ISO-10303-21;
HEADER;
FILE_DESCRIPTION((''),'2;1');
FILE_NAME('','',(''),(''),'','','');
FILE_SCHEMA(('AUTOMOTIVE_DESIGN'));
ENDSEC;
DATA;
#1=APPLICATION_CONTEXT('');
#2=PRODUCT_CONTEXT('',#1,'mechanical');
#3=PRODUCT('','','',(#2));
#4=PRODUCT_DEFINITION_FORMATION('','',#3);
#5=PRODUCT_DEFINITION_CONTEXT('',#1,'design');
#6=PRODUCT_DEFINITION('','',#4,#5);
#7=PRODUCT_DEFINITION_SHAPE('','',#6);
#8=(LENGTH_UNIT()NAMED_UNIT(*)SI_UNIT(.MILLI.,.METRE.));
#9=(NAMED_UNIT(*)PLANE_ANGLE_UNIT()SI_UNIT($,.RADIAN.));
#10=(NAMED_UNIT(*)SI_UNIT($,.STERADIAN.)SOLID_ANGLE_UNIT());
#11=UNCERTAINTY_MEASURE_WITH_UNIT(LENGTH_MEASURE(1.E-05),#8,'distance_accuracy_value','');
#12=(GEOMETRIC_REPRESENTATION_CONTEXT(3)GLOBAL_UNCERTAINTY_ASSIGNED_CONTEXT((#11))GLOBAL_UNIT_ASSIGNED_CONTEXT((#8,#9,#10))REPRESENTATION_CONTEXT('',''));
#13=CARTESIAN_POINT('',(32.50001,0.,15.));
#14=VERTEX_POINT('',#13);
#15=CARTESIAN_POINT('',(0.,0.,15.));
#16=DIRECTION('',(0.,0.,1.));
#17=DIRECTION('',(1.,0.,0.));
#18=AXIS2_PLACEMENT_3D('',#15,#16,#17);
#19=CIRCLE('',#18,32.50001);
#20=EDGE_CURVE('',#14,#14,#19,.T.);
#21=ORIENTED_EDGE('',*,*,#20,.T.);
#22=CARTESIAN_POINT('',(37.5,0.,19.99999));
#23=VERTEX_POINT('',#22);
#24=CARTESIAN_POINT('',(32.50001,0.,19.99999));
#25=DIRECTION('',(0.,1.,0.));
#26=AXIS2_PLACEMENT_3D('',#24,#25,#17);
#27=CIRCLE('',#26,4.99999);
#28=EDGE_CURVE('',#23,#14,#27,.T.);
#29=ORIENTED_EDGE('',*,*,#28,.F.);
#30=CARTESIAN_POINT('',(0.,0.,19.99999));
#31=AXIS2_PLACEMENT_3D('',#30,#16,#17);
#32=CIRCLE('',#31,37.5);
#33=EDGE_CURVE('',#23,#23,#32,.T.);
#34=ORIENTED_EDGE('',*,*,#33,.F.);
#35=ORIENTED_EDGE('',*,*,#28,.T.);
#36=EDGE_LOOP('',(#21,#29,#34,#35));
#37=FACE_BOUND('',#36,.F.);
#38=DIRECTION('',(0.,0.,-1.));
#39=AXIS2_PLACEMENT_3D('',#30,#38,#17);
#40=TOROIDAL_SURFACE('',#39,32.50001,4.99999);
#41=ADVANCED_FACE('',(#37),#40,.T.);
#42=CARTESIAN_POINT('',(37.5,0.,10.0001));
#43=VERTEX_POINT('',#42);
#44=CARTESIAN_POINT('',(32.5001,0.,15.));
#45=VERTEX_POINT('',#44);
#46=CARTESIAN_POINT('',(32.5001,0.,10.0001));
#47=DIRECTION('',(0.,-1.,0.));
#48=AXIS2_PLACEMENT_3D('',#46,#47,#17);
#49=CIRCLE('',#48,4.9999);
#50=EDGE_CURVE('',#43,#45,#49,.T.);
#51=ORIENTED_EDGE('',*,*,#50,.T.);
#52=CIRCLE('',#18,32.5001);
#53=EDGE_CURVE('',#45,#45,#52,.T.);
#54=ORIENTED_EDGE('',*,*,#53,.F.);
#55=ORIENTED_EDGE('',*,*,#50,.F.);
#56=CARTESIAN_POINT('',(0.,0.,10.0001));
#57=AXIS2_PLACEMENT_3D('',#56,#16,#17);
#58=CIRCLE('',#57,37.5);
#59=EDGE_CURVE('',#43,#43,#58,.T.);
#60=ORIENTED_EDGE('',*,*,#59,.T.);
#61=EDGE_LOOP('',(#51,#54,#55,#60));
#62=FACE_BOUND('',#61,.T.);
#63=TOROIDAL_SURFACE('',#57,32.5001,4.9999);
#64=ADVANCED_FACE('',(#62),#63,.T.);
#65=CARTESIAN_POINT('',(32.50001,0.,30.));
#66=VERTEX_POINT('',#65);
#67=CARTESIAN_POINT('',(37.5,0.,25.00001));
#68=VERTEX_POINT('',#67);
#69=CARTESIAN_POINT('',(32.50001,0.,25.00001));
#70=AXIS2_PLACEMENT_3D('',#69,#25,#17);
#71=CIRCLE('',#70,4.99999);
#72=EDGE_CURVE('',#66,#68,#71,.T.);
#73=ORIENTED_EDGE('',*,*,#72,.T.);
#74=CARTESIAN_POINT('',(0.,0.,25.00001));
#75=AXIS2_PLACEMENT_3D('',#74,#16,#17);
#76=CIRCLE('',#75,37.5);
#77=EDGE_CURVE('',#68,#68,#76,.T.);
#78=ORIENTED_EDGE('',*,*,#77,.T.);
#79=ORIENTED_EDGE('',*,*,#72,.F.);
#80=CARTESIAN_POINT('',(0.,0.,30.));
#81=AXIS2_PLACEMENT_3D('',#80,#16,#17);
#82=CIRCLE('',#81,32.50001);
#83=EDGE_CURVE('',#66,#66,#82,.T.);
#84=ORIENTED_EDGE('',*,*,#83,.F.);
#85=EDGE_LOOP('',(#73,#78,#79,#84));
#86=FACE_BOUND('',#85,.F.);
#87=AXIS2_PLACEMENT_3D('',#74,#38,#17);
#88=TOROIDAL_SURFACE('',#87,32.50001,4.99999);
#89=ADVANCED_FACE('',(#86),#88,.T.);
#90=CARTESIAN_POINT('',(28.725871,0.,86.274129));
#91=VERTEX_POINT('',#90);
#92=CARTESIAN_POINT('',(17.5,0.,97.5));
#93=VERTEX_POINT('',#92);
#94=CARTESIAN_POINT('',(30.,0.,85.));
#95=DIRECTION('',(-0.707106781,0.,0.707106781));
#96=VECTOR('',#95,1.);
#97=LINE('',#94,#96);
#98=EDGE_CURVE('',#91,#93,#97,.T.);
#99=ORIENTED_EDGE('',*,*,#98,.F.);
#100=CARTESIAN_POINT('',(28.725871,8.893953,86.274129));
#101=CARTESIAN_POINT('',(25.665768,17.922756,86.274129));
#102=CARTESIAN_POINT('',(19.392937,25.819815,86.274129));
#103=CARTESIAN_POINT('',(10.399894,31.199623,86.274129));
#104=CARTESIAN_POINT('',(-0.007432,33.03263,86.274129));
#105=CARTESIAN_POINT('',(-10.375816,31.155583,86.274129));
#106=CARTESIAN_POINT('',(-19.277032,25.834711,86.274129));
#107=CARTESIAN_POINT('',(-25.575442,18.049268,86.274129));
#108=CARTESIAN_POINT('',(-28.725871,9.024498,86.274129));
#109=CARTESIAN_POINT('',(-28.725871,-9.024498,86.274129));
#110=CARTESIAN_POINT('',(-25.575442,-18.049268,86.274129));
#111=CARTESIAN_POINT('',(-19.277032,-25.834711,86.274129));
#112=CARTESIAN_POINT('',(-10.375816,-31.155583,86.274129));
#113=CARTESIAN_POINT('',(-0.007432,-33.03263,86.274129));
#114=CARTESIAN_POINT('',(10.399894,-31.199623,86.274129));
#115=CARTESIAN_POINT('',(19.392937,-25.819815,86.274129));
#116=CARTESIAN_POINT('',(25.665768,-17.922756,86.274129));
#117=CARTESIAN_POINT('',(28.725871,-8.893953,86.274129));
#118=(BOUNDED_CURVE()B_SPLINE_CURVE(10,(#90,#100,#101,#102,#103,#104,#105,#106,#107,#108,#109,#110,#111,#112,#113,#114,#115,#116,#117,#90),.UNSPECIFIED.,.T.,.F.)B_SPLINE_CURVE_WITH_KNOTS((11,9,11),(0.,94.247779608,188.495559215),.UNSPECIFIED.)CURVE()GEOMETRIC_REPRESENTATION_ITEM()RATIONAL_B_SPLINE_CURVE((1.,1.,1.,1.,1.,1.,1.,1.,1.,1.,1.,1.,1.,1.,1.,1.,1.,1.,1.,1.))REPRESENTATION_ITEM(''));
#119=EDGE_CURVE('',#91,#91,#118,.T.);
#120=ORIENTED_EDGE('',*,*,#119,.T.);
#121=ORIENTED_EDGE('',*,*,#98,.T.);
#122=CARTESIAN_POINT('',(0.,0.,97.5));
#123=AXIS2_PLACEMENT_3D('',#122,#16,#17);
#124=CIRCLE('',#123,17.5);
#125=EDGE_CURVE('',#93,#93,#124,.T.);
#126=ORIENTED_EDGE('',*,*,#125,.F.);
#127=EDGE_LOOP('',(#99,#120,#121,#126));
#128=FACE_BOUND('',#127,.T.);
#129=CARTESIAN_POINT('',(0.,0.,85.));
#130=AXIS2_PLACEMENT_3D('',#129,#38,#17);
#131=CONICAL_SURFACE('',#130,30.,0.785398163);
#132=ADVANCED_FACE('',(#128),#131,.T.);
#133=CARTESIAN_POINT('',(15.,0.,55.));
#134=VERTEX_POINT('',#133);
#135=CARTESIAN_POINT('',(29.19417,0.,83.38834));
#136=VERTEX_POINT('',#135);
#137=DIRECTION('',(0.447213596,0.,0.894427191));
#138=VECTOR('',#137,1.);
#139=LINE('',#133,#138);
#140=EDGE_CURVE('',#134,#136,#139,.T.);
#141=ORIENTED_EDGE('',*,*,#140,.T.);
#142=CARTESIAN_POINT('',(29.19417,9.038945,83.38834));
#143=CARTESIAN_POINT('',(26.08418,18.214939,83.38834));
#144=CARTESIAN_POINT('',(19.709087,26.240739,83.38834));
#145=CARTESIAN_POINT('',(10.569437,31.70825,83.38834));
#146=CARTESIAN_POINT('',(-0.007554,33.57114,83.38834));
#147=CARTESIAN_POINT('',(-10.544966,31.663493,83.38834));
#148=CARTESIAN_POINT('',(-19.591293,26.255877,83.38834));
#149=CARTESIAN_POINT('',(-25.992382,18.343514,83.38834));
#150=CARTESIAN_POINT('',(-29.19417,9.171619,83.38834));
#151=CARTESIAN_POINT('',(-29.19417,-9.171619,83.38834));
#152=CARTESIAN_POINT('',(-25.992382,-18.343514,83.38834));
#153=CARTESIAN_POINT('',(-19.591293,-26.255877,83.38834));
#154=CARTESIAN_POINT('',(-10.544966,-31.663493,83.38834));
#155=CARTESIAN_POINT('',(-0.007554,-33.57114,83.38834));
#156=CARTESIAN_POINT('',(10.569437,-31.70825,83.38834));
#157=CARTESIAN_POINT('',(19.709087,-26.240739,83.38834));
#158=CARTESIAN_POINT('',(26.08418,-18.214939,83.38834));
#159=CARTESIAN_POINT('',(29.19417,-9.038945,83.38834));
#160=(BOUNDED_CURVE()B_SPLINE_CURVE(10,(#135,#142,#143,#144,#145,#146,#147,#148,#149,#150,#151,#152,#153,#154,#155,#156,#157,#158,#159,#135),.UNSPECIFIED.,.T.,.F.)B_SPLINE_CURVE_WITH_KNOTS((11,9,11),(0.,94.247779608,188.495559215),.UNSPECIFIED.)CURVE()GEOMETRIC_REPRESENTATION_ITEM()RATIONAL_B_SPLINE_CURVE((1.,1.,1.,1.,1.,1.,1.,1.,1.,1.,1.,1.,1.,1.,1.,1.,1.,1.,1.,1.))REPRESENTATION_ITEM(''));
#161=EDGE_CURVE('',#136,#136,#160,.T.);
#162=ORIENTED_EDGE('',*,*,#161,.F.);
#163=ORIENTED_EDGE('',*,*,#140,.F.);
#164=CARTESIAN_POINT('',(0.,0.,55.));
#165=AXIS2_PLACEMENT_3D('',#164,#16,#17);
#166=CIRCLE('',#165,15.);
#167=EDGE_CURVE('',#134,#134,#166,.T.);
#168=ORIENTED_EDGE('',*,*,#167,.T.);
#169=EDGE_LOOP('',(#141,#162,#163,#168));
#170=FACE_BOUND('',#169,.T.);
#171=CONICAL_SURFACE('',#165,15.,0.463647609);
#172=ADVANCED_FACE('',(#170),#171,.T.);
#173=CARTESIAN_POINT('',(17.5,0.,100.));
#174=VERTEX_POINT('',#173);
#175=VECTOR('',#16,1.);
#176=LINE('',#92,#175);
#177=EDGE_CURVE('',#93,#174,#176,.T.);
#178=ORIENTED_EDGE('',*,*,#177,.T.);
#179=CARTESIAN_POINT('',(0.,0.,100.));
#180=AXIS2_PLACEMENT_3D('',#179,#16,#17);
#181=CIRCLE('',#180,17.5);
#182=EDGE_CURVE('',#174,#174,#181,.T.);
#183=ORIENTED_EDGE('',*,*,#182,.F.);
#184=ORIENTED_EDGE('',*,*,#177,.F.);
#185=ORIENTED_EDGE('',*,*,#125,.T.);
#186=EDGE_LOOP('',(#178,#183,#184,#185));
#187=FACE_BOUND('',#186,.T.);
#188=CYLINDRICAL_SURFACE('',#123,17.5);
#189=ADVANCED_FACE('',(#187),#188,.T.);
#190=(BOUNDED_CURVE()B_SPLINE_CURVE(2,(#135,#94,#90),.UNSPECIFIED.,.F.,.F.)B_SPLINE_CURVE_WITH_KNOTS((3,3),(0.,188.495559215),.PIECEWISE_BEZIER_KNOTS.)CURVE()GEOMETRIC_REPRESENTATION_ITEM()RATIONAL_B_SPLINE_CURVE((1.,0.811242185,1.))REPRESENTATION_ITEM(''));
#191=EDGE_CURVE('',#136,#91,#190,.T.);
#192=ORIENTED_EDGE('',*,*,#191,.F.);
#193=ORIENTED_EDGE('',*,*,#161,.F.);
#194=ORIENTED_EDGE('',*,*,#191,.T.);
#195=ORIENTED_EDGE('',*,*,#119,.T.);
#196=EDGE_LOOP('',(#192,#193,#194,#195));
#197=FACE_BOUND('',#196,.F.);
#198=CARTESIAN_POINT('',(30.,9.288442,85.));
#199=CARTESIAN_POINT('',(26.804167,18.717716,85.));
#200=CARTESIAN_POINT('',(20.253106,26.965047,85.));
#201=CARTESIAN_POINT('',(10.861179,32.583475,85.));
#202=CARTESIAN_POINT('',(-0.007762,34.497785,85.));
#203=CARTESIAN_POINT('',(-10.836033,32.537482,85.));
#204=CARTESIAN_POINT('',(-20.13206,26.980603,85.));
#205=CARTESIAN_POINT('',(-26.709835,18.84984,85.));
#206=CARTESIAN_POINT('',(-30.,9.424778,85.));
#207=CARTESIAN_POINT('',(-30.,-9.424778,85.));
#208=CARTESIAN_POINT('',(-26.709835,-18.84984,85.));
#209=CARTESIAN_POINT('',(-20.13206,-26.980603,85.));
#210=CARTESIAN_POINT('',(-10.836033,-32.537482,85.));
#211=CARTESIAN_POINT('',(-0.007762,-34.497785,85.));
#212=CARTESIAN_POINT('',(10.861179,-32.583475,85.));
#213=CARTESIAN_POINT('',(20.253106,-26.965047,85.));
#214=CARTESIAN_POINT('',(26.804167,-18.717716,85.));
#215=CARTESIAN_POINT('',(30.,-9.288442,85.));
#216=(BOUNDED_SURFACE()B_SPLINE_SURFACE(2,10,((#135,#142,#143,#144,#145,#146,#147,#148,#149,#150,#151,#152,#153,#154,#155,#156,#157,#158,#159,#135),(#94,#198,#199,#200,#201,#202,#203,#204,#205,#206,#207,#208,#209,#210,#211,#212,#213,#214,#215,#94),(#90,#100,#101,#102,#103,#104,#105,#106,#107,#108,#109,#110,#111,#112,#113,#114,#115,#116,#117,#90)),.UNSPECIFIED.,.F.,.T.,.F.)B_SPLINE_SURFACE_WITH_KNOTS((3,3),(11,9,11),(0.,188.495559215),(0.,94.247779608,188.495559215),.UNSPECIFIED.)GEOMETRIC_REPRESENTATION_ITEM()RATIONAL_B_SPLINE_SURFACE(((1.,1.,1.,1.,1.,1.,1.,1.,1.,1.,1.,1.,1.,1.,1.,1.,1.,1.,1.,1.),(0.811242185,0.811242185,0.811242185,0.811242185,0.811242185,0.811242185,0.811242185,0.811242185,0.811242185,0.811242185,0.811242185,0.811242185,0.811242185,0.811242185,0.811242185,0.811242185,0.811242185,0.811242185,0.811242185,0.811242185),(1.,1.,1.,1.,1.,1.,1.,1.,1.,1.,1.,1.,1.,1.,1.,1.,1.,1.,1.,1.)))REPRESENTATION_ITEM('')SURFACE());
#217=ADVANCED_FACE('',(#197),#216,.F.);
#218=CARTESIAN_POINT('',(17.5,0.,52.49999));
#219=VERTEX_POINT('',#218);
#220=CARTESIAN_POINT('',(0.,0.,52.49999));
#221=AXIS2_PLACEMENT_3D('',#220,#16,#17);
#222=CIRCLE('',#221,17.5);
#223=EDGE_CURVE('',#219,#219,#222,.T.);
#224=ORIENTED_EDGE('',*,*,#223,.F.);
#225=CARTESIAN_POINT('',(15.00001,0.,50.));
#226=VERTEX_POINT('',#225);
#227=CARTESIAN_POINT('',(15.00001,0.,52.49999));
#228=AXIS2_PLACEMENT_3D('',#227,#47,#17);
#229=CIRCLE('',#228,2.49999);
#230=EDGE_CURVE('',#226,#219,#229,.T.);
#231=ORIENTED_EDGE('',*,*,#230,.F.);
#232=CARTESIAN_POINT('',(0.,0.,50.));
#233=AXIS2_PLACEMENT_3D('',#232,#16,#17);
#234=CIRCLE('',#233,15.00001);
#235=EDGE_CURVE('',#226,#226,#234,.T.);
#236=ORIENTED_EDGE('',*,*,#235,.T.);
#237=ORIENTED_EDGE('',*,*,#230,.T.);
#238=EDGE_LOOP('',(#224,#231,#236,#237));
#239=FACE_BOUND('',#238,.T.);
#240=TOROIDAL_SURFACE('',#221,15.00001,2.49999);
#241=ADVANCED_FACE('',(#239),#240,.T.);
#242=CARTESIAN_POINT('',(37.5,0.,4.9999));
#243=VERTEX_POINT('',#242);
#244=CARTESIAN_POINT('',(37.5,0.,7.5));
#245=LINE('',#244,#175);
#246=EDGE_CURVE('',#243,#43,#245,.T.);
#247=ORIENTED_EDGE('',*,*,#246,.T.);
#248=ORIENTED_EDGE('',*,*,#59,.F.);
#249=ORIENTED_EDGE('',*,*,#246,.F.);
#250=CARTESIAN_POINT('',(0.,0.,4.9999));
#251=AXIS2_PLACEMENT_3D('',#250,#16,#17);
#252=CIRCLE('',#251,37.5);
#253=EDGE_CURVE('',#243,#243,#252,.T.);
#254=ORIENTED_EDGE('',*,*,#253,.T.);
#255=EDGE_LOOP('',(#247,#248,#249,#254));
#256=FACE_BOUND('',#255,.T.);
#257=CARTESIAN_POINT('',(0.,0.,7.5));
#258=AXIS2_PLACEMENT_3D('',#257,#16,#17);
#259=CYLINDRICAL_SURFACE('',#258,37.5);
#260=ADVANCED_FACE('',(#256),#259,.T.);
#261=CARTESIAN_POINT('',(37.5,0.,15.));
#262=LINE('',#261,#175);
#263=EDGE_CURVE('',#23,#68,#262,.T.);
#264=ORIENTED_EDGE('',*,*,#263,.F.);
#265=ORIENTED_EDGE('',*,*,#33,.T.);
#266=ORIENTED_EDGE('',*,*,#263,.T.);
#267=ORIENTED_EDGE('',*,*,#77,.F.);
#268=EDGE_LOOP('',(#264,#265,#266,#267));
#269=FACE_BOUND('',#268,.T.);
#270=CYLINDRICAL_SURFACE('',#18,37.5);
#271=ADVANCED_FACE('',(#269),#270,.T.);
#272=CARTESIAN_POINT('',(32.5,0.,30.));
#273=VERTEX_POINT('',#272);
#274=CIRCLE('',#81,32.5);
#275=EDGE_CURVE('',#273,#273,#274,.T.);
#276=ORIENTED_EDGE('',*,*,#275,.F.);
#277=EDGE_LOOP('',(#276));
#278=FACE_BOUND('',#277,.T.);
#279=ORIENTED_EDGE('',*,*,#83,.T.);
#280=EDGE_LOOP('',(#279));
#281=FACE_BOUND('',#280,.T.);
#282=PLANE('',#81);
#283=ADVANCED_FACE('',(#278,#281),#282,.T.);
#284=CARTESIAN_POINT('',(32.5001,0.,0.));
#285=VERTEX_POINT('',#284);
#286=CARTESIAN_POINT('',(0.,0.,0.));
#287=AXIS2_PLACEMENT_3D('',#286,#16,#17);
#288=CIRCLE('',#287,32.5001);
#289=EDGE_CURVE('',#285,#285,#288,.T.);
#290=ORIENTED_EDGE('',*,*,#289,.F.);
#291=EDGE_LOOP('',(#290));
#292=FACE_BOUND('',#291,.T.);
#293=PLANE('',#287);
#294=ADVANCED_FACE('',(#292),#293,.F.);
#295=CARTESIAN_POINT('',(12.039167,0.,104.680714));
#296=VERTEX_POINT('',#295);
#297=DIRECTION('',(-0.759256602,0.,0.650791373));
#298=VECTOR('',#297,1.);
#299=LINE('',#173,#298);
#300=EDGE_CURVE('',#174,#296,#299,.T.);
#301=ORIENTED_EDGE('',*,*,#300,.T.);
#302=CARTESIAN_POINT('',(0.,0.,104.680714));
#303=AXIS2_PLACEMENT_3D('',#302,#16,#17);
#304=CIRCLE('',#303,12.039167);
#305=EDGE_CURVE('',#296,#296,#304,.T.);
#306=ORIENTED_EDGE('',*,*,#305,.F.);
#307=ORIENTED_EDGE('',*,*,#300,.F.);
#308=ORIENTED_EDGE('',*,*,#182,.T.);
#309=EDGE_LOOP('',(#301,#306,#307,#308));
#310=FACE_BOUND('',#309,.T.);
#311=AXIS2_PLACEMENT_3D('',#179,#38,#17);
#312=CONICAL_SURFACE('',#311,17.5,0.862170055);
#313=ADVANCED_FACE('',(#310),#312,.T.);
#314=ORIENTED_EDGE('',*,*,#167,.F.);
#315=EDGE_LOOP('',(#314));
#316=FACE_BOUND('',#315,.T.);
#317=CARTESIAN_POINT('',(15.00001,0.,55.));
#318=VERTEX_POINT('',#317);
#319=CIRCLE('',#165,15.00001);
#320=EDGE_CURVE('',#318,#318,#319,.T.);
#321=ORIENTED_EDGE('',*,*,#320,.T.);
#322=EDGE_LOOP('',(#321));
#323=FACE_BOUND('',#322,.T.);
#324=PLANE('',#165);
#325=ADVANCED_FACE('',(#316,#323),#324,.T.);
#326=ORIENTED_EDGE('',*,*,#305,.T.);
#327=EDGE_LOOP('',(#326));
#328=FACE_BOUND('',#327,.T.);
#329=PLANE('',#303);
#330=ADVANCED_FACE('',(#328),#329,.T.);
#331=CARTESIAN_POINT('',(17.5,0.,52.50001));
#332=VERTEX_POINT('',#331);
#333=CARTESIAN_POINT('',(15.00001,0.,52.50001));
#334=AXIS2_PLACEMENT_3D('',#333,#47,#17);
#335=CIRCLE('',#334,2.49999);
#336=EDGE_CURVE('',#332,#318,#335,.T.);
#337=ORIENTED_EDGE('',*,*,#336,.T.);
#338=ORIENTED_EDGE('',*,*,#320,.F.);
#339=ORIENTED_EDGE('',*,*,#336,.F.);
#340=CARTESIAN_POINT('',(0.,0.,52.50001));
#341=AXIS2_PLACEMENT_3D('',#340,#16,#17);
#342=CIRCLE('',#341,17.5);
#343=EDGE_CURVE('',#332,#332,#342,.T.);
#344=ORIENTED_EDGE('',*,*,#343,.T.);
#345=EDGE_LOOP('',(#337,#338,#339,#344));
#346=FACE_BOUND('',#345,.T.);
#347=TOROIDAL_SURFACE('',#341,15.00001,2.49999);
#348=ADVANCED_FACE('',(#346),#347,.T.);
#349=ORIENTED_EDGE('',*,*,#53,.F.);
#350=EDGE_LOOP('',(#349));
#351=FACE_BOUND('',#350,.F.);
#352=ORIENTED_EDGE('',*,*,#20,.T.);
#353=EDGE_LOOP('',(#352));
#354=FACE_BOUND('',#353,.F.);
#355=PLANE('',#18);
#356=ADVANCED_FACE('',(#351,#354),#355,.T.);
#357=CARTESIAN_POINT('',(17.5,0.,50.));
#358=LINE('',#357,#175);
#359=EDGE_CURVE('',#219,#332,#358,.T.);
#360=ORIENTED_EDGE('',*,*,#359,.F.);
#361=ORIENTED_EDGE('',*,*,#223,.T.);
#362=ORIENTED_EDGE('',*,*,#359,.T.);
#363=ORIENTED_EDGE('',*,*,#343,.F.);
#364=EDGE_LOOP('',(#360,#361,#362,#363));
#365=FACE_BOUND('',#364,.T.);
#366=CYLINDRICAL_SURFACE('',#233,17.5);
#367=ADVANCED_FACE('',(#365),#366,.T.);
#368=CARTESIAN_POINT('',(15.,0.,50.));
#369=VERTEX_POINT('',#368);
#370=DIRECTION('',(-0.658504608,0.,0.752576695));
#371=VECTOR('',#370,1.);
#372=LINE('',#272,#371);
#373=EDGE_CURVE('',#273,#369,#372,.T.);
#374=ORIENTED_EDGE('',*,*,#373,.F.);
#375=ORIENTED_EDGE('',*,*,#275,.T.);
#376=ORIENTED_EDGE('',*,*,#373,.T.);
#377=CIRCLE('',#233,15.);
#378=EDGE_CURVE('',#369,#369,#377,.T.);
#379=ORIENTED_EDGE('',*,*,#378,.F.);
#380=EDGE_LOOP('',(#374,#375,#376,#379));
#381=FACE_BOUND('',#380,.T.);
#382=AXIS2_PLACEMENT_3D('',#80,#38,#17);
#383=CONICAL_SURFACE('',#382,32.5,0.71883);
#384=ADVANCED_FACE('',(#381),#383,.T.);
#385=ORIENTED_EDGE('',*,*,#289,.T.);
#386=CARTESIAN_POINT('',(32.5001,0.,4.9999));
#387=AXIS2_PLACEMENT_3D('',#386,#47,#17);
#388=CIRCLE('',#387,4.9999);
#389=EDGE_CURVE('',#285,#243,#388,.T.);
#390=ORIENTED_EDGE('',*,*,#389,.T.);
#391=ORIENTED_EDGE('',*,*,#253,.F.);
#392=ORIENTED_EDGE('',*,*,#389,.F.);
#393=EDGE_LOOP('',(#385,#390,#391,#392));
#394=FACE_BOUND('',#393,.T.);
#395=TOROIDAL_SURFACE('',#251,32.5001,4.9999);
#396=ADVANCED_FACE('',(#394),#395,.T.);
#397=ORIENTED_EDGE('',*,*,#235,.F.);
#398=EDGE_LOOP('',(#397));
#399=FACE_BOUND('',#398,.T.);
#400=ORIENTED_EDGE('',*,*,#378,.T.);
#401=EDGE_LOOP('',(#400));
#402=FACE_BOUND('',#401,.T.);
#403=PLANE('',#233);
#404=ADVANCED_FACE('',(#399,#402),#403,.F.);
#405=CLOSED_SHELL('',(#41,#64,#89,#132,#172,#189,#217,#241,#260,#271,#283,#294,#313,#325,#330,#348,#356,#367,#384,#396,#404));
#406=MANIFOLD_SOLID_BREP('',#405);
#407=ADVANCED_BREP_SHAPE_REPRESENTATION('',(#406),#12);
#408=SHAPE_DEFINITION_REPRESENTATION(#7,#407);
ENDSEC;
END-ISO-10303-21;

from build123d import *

# Parameters (mm, degrees)
F2_R = 2.49999
F3_R = 4.99999
F0_W = 37.5
F0_H = 15
F5_R = 4.9999


# Not quite as in the source:
# - a fillet or chamfer is up to 0.001 mm smaller than in the source, because OpenCascade refuses the exact size


with BuildPart() as f1:
    # F0 (on Front) → F1 (revolve)
    with BuildSketch(Plane.XZ):
        Polygon((0, 104.6807143092), (0, 55), (15, 55), (30, 85), (17.5, 97.5), (17.5, 100), (12.0391666392, 104.6807143092), align=None)
        Polygon((0, 55), (0, 50), (15, 50), (17.5, 50), (17.5, 55), (15, 55), align=None)
        Polygon((0, 50), (0, 30), (32.5, 30), (15, 50), align=None)
        Polygon((0, 30), (0, 15), (37.5, 15), (37.5, 30), (32.5, 30), align=None)
    revolve(axis=Axis((0, 0, 79.8403571546), (0, 0, 1)))

    # F2 (radius 2.5 in the source; OpenCascade refuses exactly that, so slightly less here)
    f2_edges = [f1.edges().sort_by_distance(p)[0] for p in [
        (-30, 0, 85),
        (-17.5, 0, 55),
        (-17.5, 0, 50),
    ]]
    fillet(f2_edges, radius=F2_R)

    # F3 (radius 5 in the source; OpenCascade refuses exactly that, so slightly less here)
    f3_edges = [f1.edges().sort_by_distance(p)[0] for p in [
        (-37.5, 0, 30),
        (-37.5, 0, 15),
    ]]
    fillet(f3_edges, radius=F3_R)

    # F0 (on Front) → F4 (revolve)
    with BuildSketch(Plane.XZ):
        with Locations((18.75, 7.5)):
            Rectangle(F0_W, F0_H)
    revolve(axis=Axis((0, 0, 7.5), (0, 0, 1)))

    # F5 (radius 5 in the source; OpenCascade refuses exactly that, so slightly less here)
    f5_edges = [f1.edges().sort_by_distance(p)[0] for p in [
        (-37.5, 0, 15),
        (-37.5, 0, 0),
    ]]
    fillet(f5_edges, radius=F5_R)


solid = f1.part
